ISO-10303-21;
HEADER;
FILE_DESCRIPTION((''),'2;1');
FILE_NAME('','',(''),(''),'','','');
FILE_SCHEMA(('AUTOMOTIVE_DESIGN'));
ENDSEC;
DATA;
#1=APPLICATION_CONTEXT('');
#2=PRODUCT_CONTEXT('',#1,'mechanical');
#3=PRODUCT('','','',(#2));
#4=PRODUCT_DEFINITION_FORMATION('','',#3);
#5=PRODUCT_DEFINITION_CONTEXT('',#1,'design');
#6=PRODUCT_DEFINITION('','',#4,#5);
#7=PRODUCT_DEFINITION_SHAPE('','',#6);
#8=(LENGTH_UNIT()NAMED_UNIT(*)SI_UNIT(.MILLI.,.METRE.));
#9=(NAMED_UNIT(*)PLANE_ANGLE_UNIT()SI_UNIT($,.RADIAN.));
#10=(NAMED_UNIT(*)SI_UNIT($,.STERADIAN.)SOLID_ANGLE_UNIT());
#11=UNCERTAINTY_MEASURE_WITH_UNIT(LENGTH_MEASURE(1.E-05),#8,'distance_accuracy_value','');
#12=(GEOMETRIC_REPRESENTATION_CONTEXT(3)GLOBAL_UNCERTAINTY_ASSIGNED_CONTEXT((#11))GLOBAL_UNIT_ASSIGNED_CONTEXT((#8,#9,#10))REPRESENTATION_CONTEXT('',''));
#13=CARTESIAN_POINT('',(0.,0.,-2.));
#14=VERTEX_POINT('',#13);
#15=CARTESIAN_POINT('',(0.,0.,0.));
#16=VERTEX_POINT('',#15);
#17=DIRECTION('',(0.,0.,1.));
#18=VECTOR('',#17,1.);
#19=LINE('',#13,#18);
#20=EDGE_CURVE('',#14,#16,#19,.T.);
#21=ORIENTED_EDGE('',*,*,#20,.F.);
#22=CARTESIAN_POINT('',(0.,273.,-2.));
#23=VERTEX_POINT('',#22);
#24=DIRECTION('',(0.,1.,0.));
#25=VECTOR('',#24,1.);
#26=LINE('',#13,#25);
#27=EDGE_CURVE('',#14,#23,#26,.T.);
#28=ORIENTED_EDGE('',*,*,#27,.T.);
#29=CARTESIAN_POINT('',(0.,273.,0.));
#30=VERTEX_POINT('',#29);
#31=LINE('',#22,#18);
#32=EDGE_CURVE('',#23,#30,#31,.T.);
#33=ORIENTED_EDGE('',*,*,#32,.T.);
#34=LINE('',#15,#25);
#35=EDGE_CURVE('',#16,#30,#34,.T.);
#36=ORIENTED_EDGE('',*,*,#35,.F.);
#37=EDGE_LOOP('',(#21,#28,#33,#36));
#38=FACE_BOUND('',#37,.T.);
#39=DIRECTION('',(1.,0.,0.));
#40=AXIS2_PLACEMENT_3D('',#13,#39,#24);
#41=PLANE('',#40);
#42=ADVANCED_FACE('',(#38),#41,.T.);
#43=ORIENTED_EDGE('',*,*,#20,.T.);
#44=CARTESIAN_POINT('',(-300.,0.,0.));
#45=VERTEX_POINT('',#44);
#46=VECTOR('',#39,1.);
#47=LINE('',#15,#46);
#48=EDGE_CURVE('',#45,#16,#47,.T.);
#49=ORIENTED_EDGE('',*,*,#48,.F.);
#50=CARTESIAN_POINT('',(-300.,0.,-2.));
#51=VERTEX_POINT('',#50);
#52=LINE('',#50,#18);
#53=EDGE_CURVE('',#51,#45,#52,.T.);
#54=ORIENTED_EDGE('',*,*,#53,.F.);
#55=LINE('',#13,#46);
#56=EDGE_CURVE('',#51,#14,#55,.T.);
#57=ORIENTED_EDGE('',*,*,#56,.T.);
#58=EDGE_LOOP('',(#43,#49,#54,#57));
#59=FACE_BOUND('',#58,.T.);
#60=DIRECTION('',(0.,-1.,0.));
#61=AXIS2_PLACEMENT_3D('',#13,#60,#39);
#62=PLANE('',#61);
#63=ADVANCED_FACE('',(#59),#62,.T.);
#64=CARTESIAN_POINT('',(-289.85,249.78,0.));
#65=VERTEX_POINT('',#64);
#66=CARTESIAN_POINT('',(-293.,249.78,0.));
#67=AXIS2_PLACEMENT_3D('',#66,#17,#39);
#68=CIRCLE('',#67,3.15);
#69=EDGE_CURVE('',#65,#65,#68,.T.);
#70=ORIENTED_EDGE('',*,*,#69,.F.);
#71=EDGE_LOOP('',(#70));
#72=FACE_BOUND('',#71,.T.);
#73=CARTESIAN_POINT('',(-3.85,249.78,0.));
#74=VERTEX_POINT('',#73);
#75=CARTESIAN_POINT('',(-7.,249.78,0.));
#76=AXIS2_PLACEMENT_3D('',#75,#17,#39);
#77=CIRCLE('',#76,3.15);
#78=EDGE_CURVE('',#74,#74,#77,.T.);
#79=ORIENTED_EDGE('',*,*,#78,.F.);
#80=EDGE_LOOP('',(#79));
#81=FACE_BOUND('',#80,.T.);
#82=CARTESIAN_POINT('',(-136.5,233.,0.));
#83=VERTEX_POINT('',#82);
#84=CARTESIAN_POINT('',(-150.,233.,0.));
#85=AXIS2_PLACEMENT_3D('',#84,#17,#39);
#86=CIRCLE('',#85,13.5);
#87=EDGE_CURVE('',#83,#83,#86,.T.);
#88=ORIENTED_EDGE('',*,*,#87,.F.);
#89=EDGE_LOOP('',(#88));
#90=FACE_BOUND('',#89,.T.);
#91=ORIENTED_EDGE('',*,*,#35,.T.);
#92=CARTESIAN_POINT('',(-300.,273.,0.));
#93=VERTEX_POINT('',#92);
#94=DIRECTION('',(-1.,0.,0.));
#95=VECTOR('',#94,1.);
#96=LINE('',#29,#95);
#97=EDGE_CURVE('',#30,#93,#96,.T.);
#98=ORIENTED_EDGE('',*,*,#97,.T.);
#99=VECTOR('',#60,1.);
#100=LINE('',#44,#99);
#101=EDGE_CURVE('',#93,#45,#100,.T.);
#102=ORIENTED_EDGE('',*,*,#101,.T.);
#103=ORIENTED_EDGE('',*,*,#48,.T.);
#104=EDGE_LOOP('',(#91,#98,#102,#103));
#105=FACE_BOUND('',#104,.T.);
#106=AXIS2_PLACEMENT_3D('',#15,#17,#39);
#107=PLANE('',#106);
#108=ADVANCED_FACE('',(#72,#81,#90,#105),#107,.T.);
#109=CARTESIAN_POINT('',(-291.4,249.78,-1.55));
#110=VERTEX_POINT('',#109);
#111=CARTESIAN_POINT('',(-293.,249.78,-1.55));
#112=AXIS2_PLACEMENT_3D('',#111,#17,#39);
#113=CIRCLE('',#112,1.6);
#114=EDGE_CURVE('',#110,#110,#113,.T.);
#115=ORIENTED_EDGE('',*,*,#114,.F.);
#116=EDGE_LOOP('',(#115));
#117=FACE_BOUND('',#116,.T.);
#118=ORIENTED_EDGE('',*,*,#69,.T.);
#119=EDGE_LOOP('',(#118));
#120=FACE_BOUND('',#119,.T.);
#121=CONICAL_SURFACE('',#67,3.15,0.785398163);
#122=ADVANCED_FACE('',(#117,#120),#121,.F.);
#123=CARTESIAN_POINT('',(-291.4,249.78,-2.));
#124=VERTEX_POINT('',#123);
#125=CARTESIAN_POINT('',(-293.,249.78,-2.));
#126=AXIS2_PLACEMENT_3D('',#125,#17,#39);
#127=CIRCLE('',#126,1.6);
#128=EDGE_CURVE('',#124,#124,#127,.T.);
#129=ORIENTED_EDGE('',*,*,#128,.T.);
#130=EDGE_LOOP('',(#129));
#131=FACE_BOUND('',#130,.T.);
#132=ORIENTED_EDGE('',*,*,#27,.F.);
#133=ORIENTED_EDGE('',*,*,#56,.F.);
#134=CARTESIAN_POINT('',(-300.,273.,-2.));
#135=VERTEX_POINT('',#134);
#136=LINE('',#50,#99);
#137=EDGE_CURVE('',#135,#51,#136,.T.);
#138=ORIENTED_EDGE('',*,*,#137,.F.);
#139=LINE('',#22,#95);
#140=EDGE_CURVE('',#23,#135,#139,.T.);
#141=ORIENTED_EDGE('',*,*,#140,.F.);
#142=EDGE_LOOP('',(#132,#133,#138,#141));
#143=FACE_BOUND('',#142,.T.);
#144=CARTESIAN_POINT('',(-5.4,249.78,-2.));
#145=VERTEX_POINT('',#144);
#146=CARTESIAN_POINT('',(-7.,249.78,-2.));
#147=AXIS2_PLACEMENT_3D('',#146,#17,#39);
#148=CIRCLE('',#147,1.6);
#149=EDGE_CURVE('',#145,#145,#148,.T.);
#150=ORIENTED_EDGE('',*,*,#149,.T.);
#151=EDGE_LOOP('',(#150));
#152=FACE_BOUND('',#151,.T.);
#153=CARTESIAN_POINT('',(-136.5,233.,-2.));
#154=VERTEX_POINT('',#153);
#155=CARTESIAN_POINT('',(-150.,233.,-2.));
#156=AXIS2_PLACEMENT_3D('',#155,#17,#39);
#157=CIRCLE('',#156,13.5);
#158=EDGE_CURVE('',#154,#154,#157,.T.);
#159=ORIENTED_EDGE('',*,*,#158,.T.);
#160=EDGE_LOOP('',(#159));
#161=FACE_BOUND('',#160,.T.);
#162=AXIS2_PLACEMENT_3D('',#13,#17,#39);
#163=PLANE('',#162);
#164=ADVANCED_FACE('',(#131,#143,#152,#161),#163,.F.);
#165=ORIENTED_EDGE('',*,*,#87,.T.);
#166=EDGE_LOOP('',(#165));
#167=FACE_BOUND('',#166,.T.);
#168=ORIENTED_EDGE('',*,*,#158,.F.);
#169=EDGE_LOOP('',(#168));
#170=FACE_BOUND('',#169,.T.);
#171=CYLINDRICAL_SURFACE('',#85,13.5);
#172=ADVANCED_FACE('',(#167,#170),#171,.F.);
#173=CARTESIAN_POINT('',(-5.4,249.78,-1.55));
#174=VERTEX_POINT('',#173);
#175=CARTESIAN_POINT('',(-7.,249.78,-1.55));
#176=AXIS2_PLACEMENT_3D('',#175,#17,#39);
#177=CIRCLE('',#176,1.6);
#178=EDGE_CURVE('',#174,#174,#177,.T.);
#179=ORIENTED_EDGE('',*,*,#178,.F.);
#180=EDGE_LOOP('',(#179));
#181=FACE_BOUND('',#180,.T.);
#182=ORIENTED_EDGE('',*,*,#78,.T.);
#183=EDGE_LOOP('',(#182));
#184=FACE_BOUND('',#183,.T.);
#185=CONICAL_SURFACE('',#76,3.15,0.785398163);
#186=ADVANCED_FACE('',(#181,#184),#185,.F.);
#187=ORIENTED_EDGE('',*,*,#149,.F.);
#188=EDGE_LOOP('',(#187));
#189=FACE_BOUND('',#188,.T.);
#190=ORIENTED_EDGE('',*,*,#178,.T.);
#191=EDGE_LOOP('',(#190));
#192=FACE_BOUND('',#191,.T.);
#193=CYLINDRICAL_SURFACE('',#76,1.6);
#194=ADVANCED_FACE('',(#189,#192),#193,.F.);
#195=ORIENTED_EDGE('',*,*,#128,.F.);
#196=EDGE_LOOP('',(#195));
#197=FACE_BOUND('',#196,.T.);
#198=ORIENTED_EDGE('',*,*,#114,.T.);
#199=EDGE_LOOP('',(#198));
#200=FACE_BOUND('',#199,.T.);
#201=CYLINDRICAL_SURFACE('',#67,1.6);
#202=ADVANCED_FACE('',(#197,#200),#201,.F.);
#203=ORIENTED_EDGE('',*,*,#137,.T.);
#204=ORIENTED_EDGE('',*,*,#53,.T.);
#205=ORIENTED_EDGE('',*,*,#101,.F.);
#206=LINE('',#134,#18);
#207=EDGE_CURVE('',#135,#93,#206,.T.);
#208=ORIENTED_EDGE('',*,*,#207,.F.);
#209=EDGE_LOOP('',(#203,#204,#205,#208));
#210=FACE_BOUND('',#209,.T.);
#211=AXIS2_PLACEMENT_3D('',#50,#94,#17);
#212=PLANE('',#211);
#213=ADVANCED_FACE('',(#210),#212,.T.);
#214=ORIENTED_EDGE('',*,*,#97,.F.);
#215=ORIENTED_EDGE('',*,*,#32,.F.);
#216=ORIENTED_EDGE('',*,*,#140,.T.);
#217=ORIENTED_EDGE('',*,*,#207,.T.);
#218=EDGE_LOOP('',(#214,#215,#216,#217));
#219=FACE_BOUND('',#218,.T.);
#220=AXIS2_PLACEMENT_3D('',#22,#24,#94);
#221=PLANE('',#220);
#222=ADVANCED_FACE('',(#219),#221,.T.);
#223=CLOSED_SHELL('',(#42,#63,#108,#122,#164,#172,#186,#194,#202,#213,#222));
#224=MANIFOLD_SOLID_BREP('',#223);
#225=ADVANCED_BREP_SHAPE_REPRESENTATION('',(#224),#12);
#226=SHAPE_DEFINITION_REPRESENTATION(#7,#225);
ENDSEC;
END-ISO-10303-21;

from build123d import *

# Parameters (mm, degrees)
SKETCH1_W             = 300
SKETCH1_H             = 273
BASE_FLANGE1_DEPTH    = 2
M25_CLEARANCE_HOLE1_D = 27


# Sheet-metal steps are written as plain solids
with BuildPart() as part:
    # Sketch1 → Base-Flange1 (new body)
    with BuildSketch(Plane.XY):
        with Locations((-150, 136.5)):
            Rectangle(SKETCH1_W, SKETCH1_H)
    extrude(amount=-BASE_FLANGE1_DEPTH)

    # Sketch8 → CSK for M3 Oval Head Machine Screw1 (revolve, cut)
    with BuildSketch(Plane(origin=(-293, 249.78, 0), x_dir=(0, -1, 0), z_dir=(1, 0, 0))):
        Polygon((0, 0), (0, 2), (1.6, 2), (1.6, 1.55), (3.15, 0), align=None)
    csk_for_m3_oval_head_machine_screw1 = revolve(axis=Axis((-293, 249.78, 6.35), (0, 0, -1)), mode=Mode.SUBTRACT)

    # Mirror1: CSK for M3 Oval Head Machine Screw1 across plane
    add(csk_for_m3_oval_head_machine_screw1.mirror(Plane.ZY.offset(150)), mode=Mode.SUBTRACT)

    # M25 Clearance Hole1 (through all)
    with Locations(Plane.XY):
        with Locations((-150, 233)):
            Hole(M25_CLEARANCE_HOLE1_D / 2)


solid = part.part
